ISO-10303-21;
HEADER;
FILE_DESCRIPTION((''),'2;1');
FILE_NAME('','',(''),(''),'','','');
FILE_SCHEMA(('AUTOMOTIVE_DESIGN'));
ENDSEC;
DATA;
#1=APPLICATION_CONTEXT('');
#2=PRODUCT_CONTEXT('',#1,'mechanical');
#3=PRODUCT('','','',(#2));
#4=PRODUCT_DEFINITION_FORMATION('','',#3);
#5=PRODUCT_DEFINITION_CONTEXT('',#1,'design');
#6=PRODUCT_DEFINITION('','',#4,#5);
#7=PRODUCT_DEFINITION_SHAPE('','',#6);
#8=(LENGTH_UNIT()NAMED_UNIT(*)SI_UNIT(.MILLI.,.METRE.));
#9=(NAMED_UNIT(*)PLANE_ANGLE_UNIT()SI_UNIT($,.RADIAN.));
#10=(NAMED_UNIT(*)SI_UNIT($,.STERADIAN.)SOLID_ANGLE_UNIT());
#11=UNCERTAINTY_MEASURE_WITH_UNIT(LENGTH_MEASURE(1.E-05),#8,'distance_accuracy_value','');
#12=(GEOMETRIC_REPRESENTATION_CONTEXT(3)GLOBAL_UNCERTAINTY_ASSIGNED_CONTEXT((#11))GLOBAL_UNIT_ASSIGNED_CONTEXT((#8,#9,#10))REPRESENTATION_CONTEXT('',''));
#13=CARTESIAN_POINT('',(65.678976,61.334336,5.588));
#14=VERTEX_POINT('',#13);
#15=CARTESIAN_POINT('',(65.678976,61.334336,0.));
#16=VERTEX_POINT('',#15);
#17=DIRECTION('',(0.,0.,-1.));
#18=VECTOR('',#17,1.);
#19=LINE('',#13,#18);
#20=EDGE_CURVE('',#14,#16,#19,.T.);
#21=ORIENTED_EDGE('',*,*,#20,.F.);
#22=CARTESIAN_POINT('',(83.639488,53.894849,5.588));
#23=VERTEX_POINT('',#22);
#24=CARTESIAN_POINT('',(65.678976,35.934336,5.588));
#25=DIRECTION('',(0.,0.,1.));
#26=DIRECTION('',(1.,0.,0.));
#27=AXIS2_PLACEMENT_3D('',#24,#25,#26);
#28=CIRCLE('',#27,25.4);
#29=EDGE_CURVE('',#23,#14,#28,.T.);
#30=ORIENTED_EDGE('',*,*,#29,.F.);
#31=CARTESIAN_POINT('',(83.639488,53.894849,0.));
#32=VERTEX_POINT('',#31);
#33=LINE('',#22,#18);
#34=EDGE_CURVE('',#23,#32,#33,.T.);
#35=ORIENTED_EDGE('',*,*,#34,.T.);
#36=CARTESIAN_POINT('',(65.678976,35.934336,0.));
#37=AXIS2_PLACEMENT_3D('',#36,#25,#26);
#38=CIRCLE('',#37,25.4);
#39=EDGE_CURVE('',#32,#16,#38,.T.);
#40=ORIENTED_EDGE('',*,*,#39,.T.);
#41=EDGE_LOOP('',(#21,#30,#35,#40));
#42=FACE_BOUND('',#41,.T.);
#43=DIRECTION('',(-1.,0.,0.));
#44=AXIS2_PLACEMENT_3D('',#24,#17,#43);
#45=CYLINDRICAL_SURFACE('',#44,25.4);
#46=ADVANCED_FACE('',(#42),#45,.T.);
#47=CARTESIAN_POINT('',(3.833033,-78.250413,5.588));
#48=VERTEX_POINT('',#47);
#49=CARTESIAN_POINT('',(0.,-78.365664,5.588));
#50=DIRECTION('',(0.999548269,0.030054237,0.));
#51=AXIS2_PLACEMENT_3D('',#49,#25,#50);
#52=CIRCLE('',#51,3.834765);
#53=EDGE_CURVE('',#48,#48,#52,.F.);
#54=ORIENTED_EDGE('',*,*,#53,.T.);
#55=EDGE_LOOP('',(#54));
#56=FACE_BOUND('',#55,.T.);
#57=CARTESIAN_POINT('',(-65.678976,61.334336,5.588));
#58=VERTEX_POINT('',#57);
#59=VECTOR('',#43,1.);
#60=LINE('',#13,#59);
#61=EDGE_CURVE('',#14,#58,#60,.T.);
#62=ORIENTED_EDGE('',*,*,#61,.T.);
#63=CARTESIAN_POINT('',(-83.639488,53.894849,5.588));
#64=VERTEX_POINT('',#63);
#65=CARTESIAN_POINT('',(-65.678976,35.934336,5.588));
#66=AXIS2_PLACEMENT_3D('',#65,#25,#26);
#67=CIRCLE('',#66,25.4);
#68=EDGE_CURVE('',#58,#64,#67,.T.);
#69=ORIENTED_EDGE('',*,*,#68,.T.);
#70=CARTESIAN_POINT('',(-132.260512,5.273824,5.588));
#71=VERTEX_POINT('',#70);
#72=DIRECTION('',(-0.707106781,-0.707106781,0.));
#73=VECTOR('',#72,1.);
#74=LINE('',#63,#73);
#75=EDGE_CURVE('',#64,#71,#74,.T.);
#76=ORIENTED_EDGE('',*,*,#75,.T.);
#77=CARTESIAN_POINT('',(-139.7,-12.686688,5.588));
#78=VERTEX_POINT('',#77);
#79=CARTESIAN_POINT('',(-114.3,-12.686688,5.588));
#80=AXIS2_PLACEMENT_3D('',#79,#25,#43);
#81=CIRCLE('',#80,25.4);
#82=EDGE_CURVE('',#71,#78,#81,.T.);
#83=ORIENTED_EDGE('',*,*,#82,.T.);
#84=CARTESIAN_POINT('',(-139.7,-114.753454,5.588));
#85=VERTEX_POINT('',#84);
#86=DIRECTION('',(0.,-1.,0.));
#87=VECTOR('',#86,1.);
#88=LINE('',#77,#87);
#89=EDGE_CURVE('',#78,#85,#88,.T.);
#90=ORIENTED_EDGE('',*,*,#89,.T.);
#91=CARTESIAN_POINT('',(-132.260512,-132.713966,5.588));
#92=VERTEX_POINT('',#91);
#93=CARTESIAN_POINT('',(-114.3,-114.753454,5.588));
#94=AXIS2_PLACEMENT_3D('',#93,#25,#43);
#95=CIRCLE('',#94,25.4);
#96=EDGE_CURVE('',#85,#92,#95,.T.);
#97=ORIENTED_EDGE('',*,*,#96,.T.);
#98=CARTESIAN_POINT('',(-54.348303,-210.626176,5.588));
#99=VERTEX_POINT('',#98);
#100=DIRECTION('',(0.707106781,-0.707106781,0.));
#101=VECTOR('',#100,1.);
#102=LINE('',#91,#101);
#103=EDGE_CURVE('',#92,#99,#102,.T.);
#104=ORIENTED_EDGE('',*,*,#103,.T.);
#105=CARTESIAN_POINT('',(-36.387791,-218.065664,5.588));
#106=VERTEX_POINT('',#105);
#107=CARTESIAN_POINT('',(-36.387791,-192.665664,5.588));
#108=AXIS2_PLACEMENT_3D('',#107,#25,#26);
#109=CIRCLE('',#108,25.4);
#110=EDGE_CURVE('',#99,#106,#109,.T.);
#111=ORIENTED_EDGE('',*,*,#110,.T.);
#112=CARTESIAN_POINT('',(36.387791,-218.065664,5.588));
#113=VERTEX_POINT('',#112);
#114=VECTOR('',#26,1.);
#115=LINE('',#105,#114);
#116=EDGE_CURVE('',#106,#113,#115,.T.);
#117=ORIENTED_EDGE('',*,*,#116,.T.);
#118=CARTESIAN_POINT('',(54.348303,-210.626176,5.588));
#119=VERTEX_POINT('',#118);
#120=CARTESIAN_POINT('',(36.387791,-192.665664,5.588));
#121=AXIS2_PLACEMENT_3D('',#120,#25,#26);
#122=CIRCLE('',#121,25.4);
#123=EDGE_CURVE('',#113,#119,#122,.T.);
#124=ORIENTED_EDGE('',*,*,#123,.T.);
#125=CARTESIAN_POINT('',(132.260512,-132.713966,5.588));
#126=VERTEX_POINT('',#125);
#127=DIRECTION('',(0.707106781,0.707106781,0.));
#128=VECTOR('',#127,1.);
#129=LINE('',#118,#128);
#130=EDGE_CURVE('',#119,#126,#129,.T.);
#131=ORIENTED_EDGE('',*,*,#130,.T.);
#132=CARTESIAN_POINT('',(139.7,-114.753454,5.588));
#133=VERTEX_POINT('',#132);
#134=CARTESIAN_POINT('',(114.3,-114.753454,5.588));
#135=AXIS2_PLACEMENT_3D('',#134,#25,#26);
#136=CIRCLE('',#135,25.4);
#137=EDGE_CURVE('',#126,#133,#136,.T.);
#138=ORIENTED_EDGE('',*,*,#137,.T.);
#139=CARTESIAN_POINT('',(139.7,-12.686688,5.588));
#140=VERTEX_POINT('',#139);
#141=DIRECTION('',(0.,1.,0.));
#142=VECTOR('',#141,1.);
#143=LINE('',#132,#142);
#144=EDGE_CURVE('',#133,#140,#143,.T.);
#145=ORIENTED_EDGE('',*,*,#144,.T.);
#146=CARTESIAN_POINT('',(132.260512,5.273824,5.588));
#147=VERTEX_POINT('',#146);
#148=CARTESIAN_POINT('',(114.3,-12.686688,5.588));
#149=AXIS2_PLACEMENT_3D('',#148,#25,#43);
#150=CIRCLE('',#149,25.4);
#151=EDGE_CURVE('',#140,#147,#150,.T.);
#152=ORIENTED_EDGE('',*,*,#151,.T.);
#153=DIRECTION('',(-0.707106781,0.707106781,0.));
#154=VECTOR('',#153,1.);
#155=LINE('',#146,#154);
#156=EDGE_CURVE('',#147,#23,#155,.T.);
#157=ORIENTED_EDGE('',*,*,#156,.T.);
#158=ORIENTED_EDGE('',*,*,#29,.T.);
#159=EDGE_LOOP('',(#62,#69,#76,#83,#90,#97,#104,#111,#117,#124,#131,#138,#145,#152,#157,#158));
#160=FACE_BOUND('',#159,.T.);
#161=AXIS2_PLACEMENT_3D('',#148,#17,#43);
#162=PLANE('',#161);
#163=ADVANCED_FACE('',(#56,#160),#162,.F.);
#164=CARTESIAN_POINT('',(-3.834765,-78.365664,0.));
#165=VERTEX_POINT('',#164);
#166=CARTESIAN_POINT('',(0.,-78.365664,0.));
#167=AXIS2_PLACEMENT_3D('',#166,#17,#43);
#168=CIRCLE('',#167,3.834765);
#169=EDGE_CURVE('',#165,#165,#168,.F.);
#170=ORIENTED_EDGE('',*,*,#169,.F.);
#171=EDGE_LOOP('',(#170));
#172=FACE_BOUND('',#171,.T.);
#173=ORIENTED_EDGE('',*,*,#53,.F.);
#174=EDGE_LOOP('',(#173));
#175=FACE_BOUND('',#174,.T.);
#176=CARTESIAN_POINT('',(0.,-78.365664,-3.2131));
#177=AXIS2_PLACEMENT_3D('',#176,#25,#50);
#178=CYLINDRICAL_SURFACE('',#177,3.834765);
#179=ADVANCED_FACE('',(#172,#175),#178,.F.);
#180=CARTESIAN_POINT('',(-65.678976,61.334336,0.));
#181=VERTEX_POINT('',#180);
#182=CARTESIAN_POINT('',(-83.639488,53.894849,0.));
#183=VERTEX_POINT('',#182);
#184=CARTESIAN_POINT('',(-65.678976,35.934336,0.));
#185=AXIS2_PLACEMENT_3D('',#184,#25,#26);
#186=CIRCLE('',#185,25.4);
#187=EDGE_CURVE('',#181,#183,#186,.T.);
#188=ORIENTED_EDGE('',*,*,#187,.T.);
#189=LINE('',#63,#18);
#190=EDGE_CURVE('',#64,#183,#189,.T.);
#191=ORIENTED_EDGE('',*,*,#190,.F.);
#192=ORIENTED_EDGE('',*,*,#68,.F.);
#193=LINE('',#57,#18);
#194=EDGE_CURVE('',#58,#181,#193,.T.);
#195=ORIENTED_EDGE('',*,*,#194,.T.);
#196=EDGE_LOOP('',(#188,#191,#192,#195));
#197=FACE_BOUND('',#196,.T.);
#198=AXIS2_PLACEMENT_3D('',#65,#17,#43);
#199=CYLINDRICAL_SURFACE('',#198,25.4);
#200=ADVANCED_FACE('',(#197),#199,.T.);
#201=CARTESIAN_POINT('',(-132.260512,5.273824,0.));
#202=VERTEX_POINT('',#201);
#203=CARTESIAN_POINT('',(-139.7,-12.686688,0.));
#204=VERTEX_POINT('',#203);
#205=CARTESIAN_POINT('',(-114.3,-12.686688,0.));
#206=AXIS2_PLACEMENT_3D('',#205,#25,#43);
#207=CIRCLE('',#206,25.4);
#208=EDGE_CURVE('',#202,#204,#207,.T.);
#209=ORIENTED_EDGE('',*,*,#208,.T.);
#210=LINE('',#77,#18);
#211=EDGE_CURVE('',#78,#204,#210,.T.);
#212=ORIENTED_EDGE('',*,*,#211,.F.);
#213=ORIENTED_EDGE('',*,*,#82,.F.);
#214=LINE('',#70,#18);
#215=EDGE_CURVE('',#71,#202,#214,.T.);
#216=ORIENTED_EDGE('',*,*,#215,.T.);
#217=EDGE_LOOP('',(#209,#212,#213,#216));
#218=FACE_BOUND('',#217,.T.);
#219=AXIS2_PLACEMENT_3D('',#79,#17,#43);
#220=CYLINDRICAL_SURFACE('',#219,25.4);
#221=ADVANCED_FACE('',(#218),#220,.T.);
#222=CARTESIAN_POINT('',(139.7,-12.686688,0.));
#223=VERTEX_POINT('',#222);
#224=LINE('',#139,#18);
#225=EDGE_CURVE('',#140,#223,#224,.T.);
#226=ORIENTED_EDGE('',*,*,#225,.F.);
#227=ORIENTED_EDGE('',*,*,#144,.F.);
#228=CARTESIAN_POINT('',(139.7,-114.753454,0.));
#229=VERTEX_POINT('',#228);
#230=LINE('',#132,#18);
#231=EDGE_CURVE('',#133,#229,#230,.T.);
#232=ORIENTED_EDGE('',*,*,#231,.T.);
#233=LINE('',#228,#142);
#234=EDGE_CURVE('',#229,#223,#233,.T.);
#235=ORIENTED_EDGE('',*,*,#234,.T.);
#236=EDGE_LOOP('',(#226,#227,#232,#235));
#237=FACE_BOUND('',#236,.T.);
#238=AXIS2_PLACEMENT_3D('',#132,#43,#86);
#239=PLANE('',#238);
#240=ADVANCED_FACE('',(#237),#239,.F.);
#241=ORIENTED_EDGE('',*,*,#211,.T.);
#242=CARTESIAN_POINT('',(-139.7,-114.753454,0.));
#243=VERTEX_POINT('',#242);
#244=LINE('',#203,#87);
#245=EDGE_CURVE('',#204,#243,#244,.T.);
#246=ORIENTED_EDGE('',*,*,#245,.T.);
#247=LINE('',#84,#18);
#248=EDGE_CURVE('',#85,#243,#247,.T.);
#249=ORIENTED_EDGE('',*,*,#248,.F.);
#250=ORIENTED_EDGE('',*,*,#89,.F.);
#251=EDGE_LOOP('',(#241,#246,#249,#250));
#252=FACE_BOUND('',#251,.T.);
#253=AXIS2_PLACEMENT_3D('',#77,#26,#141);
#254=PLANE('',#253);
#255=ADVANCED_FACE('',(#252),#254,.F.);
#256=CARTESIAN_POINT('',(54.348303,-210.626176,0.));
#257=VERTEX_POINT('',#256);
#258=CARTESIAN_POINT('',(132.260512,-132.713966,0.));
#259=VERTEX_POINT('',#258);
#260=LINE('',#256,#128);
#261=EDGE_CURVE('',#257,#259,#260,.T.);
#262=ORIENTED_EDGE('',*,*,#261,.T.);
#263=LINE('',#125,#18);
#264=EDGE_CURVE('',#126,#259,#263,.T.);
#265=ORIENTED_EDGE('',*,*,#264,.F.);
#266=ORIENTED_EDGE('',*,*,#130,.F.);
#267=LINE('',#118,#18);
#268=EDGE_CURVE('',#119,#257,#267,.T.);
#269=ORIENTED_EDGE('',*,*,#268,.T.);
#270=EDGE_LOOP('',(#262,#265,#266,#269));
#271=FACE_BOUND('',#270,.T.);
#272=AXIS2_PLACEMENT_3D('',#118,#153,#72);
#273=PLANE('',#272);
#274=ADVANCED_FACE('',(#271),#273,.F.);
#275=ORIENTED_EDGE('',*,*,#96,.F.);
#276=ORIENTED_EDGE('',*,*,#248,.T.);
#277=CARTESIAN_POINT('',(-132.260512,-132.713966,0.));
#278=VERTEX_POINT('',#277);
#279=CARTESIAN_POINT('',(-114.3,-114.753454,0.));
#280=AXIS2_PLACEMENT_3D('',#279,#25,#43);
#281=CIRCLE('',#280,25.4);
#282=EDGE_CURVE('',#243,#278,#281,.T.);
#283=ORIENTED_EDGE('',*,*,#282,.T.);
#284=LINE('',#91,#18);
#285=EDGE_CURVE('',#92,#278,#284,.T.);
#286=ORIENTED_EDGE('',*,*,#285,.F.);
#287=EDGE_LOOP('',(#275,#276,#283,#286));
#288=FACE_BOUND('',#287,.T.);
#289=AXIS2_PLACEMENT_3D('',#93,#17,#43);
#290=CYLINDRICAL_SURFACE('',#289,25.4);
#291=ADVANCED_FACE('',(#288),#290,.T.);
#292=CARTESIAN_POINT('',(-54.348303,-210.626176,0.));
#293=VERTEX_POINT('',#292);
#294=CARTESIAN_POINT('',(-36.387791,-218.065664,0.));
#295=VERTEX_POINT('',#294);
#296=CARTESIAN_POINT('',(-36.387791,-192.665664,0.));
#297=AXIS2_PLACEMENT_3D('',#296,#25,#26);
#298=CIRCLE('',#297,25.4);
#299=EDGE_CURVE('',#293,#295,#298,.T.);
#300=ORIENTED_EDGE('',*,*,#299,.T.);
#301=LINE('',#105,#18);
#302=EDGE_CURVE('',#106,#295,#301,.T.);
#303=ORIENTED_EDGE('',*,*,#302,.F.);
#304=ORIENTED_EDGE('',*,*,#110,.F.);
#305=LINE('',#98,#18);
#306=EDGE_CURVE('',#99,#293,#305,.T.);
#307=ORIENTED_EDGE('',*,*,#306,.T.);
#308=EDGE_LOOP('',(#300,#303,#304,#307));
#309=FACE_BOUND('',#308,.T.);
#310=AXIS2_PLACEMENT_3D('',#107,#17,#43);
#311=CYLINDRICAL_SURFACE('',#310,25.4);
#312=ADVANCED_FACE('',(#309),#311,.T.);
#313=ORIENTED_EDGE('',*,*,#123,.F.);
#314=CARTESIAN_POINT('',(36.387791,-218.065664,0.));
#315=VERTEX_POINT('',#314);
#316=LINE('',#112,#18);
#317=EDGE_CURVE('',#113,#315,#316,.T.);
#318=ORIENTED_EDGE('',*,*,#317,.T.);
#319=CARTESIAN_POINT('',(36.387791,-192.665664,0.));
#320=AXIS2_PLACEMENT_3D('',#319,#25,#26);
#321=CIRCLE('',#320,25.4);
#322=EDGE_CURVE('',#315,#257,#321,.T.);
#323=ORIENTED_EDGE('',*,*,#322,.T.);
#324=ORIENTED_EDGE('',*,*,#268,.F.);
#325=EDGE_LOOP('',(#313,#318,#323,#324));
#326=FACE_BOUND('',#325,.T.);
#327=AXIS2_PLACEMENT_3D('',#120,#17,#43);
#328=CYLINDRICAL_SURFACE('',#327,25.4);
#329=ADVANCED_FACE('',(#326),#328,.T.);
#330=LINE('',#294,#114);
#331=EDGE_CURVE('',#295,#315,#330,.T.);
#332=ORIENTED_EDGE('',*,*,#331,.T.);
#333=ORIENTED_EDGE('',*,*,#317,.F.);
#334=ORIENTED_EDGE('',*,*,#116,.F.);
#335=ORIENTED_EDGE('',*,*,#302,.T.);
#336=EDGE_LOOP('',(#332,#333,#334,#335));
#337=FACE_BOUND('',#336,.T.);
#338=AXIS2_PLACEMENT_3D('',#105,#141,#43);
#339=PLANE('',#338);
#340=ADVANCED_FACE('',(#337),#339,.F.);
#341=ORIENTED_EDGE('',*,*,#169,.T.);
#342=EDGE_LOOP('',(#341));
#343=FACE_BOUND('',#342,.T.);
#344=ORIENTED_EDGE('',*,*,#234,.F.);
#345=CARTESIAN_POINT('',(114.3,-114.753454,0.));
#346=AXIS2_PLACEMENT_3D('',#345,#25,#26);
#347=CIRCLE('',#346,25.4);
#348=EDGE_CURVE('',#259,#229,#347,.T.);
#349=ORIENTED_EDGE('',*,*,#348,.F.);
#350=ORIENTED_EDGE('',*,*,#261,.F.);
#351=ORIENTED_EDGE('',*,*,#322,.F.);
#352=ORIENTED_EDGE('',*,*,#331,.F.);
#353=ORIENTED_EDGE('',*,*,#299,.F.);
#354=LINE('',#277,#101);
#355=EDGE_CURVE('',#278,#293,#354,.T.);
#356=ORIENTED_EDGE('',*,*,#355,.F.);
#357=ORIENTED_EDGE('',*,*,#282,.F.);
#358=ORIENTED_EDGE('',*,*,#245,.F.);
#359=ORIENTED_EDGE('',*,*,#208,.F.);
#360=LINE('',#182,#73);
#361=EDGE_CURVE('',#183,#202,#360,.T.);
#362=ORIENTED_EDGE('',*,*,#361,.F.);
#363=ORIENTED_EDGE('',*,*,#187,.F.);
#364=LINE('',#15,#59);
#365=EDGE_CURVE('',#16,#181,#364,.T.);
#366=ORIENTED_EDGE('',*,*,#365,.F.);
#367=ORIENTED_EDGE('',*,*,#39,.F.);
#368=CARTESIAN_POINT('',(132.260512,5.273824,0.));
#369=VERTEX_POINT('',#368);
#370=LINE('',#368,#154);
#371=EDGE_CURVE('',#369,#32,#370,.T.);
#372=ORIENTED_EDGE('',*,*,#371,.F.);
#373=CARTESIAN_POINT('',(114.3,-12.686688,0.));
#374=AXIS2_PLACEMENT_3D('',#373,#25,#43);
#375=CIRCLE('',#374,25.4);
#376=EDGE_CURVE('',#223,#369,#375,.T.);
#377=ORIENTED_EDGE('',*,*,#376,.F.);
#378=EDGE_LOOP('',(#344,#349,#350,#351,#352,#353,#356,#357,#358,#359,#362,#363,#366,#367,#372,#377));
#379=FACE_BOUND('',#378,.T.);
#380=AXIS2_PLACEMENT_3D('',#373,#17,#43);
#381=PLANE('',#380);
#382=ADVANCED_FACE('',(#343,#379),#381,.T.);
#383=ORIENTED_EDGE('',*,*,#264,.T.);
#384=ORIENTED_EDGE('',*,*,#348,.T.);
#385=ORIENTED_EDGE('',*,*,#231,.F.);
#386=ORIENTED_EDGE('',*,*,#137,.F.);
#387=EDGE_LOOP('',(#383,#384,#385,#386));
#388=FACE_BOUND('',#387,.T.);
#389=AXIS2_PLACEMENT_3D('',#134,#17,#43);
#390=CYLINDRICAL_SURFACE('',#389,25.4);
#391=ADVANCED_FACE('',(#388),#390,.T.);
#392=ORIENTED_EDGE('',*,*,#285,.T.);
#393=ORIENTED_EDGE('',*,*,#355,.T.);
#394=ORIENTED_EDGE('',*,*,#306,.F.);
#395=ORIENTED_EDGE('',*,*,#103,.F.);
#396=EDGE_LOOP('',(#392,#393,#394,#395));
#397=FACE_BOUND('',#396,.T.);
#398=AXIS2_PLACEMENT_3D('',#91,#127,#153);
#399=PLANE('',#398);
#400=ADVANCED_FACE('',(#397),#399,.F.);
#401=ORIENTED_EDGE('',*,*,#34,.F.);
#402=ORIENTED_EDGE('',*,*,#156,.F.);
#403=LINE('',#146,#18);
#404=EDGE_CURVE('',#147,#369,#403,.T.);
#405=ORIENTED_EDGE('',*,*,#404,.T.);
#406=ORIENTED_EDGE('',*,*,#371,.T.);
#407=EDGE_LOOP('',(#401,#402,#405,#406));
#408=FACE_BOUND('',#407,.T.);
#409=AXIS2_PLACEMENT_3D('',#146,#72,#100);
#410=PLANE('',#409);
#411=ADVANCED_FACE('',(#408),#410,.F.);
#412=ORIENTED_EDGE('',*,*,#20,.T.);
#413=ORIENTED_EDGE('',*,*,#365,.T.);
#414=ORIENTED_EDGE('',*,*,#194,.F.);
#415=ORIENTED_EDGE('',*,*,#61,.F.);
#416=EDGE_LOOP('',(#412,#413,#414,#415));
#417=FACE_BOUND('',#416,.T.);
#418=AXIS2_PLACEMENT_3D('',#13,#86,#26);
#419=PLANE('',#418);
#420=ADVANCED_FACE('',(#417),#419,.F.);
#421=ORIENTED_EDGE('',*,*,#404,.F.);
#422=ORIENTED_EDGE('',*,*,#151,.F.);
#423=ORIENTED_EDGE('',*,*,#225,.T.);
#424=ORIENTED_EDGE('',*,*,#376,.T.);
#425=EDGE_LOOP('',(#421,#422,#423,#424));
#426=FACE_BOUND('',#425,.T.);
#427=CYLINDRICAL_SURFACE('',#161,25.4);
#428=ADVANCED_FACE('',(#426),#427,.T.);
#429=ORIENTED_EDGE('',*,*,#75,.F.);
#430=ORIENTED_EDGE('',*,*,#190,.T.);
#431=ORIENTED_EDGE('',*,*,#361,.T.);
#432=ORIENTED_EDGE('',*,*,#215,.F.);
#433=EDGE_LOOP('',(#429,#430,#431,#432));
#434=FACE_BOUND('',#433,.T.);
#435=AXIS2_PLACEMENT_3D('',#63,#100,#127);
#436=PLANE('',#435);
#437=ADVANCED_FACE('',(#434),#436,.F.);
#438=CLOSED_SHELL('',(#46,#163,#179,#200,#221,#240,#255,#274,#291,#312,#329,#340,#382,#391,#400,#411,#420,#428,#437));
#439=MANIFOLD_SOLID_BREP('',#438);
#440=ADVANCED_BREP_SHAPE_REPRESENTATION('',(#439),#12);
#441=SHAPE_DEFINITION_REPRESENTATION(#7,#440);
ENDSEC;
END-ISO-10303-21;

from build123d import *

# Parameters (mm, degrees)
BOSS_EXTRUDE1_DEPTH = 5.588
CAVITY1_OUTLINE_R   = 3.834765
CAVITY1_DEPTH       = 5.588


# Read off the part's stored shape, not the designer's step: Cavity1
with BuildPart() as part:
    # Sketch1 → Boss-Extrude1 (new body)
    with BuildSketch(Plane.XY):
        with BuildLine():
            Line((65.678975516, 61.334336478), (-65.678975516, 61.334336478))
            ThreePointArc((-65.678975516, 61.334336478), (-75.399134698, 59.400876604), (-83.639487758, 53.89484872))
            Line((-83.639487758, 53.89484872), (-132.260512242, 5.273824236))
            ThreePointArc((-132.260512242, 5.273824236), (-137.766540126, -2.966528824), (-139.7, -12.686688006))
            Line((-139.7, -12.686688006), (-139.7, -114.753454114))
            ThreePointArc((-139.7, -114.753454114), (-137.766540126, -124.473613296), (-132.260512242, -132.713966356))
            Line((-132.260512242, -132.713966356), (-54.348302834, -210.626175764))
            ThreePointArc((-54.348302834, -210.626175764), (-46.107949774, -216.132203648), (-36.387790592, -218.065663522))
            Line((-36.387790592, -218.065663522), (36.387790592, -218.065663522))
            ThreePointArc((36.387790592, -218.065663522), (46.107949774, -216.132203648), (54.348302834, -210.626175764))
            Line((54.348302834, -210.626175764), (132.260512242, -132.713966356))
            ThreePointArc((132.260512242, -132.713966356), (137.766540126, -124.473613296), (139.7, -114.753454114))
            Line((139.7, -114.753454114), (139.7, -12.686688006))
            ThreePointArc((139.7, -12.686688006), (137.766540126, -2.966528824), (132.260512242, 5.273824236))
            Line((132.260512242, 5.273824236), (83.639487758, 53.89484872))
            ThreePointArc((83.639487758, 53.89484872), (75.399134698, 59.400876604), (65.678975516, 61.334336478))
        make_face()
    extrude(amount=BOSS_EXTRUDE1_DEPTH)

    # Cavity1 outline → Cavity1 (cut)
    with BuildSketch(Plane.XY):
        with Locations((0, -78.365663522)):
            Circle(CAVITY1_OUTLINE_R)
    extrude(amount=CAVITY1_DEPTH, mode=Mode.SUBTRACT)


solid = part.part
